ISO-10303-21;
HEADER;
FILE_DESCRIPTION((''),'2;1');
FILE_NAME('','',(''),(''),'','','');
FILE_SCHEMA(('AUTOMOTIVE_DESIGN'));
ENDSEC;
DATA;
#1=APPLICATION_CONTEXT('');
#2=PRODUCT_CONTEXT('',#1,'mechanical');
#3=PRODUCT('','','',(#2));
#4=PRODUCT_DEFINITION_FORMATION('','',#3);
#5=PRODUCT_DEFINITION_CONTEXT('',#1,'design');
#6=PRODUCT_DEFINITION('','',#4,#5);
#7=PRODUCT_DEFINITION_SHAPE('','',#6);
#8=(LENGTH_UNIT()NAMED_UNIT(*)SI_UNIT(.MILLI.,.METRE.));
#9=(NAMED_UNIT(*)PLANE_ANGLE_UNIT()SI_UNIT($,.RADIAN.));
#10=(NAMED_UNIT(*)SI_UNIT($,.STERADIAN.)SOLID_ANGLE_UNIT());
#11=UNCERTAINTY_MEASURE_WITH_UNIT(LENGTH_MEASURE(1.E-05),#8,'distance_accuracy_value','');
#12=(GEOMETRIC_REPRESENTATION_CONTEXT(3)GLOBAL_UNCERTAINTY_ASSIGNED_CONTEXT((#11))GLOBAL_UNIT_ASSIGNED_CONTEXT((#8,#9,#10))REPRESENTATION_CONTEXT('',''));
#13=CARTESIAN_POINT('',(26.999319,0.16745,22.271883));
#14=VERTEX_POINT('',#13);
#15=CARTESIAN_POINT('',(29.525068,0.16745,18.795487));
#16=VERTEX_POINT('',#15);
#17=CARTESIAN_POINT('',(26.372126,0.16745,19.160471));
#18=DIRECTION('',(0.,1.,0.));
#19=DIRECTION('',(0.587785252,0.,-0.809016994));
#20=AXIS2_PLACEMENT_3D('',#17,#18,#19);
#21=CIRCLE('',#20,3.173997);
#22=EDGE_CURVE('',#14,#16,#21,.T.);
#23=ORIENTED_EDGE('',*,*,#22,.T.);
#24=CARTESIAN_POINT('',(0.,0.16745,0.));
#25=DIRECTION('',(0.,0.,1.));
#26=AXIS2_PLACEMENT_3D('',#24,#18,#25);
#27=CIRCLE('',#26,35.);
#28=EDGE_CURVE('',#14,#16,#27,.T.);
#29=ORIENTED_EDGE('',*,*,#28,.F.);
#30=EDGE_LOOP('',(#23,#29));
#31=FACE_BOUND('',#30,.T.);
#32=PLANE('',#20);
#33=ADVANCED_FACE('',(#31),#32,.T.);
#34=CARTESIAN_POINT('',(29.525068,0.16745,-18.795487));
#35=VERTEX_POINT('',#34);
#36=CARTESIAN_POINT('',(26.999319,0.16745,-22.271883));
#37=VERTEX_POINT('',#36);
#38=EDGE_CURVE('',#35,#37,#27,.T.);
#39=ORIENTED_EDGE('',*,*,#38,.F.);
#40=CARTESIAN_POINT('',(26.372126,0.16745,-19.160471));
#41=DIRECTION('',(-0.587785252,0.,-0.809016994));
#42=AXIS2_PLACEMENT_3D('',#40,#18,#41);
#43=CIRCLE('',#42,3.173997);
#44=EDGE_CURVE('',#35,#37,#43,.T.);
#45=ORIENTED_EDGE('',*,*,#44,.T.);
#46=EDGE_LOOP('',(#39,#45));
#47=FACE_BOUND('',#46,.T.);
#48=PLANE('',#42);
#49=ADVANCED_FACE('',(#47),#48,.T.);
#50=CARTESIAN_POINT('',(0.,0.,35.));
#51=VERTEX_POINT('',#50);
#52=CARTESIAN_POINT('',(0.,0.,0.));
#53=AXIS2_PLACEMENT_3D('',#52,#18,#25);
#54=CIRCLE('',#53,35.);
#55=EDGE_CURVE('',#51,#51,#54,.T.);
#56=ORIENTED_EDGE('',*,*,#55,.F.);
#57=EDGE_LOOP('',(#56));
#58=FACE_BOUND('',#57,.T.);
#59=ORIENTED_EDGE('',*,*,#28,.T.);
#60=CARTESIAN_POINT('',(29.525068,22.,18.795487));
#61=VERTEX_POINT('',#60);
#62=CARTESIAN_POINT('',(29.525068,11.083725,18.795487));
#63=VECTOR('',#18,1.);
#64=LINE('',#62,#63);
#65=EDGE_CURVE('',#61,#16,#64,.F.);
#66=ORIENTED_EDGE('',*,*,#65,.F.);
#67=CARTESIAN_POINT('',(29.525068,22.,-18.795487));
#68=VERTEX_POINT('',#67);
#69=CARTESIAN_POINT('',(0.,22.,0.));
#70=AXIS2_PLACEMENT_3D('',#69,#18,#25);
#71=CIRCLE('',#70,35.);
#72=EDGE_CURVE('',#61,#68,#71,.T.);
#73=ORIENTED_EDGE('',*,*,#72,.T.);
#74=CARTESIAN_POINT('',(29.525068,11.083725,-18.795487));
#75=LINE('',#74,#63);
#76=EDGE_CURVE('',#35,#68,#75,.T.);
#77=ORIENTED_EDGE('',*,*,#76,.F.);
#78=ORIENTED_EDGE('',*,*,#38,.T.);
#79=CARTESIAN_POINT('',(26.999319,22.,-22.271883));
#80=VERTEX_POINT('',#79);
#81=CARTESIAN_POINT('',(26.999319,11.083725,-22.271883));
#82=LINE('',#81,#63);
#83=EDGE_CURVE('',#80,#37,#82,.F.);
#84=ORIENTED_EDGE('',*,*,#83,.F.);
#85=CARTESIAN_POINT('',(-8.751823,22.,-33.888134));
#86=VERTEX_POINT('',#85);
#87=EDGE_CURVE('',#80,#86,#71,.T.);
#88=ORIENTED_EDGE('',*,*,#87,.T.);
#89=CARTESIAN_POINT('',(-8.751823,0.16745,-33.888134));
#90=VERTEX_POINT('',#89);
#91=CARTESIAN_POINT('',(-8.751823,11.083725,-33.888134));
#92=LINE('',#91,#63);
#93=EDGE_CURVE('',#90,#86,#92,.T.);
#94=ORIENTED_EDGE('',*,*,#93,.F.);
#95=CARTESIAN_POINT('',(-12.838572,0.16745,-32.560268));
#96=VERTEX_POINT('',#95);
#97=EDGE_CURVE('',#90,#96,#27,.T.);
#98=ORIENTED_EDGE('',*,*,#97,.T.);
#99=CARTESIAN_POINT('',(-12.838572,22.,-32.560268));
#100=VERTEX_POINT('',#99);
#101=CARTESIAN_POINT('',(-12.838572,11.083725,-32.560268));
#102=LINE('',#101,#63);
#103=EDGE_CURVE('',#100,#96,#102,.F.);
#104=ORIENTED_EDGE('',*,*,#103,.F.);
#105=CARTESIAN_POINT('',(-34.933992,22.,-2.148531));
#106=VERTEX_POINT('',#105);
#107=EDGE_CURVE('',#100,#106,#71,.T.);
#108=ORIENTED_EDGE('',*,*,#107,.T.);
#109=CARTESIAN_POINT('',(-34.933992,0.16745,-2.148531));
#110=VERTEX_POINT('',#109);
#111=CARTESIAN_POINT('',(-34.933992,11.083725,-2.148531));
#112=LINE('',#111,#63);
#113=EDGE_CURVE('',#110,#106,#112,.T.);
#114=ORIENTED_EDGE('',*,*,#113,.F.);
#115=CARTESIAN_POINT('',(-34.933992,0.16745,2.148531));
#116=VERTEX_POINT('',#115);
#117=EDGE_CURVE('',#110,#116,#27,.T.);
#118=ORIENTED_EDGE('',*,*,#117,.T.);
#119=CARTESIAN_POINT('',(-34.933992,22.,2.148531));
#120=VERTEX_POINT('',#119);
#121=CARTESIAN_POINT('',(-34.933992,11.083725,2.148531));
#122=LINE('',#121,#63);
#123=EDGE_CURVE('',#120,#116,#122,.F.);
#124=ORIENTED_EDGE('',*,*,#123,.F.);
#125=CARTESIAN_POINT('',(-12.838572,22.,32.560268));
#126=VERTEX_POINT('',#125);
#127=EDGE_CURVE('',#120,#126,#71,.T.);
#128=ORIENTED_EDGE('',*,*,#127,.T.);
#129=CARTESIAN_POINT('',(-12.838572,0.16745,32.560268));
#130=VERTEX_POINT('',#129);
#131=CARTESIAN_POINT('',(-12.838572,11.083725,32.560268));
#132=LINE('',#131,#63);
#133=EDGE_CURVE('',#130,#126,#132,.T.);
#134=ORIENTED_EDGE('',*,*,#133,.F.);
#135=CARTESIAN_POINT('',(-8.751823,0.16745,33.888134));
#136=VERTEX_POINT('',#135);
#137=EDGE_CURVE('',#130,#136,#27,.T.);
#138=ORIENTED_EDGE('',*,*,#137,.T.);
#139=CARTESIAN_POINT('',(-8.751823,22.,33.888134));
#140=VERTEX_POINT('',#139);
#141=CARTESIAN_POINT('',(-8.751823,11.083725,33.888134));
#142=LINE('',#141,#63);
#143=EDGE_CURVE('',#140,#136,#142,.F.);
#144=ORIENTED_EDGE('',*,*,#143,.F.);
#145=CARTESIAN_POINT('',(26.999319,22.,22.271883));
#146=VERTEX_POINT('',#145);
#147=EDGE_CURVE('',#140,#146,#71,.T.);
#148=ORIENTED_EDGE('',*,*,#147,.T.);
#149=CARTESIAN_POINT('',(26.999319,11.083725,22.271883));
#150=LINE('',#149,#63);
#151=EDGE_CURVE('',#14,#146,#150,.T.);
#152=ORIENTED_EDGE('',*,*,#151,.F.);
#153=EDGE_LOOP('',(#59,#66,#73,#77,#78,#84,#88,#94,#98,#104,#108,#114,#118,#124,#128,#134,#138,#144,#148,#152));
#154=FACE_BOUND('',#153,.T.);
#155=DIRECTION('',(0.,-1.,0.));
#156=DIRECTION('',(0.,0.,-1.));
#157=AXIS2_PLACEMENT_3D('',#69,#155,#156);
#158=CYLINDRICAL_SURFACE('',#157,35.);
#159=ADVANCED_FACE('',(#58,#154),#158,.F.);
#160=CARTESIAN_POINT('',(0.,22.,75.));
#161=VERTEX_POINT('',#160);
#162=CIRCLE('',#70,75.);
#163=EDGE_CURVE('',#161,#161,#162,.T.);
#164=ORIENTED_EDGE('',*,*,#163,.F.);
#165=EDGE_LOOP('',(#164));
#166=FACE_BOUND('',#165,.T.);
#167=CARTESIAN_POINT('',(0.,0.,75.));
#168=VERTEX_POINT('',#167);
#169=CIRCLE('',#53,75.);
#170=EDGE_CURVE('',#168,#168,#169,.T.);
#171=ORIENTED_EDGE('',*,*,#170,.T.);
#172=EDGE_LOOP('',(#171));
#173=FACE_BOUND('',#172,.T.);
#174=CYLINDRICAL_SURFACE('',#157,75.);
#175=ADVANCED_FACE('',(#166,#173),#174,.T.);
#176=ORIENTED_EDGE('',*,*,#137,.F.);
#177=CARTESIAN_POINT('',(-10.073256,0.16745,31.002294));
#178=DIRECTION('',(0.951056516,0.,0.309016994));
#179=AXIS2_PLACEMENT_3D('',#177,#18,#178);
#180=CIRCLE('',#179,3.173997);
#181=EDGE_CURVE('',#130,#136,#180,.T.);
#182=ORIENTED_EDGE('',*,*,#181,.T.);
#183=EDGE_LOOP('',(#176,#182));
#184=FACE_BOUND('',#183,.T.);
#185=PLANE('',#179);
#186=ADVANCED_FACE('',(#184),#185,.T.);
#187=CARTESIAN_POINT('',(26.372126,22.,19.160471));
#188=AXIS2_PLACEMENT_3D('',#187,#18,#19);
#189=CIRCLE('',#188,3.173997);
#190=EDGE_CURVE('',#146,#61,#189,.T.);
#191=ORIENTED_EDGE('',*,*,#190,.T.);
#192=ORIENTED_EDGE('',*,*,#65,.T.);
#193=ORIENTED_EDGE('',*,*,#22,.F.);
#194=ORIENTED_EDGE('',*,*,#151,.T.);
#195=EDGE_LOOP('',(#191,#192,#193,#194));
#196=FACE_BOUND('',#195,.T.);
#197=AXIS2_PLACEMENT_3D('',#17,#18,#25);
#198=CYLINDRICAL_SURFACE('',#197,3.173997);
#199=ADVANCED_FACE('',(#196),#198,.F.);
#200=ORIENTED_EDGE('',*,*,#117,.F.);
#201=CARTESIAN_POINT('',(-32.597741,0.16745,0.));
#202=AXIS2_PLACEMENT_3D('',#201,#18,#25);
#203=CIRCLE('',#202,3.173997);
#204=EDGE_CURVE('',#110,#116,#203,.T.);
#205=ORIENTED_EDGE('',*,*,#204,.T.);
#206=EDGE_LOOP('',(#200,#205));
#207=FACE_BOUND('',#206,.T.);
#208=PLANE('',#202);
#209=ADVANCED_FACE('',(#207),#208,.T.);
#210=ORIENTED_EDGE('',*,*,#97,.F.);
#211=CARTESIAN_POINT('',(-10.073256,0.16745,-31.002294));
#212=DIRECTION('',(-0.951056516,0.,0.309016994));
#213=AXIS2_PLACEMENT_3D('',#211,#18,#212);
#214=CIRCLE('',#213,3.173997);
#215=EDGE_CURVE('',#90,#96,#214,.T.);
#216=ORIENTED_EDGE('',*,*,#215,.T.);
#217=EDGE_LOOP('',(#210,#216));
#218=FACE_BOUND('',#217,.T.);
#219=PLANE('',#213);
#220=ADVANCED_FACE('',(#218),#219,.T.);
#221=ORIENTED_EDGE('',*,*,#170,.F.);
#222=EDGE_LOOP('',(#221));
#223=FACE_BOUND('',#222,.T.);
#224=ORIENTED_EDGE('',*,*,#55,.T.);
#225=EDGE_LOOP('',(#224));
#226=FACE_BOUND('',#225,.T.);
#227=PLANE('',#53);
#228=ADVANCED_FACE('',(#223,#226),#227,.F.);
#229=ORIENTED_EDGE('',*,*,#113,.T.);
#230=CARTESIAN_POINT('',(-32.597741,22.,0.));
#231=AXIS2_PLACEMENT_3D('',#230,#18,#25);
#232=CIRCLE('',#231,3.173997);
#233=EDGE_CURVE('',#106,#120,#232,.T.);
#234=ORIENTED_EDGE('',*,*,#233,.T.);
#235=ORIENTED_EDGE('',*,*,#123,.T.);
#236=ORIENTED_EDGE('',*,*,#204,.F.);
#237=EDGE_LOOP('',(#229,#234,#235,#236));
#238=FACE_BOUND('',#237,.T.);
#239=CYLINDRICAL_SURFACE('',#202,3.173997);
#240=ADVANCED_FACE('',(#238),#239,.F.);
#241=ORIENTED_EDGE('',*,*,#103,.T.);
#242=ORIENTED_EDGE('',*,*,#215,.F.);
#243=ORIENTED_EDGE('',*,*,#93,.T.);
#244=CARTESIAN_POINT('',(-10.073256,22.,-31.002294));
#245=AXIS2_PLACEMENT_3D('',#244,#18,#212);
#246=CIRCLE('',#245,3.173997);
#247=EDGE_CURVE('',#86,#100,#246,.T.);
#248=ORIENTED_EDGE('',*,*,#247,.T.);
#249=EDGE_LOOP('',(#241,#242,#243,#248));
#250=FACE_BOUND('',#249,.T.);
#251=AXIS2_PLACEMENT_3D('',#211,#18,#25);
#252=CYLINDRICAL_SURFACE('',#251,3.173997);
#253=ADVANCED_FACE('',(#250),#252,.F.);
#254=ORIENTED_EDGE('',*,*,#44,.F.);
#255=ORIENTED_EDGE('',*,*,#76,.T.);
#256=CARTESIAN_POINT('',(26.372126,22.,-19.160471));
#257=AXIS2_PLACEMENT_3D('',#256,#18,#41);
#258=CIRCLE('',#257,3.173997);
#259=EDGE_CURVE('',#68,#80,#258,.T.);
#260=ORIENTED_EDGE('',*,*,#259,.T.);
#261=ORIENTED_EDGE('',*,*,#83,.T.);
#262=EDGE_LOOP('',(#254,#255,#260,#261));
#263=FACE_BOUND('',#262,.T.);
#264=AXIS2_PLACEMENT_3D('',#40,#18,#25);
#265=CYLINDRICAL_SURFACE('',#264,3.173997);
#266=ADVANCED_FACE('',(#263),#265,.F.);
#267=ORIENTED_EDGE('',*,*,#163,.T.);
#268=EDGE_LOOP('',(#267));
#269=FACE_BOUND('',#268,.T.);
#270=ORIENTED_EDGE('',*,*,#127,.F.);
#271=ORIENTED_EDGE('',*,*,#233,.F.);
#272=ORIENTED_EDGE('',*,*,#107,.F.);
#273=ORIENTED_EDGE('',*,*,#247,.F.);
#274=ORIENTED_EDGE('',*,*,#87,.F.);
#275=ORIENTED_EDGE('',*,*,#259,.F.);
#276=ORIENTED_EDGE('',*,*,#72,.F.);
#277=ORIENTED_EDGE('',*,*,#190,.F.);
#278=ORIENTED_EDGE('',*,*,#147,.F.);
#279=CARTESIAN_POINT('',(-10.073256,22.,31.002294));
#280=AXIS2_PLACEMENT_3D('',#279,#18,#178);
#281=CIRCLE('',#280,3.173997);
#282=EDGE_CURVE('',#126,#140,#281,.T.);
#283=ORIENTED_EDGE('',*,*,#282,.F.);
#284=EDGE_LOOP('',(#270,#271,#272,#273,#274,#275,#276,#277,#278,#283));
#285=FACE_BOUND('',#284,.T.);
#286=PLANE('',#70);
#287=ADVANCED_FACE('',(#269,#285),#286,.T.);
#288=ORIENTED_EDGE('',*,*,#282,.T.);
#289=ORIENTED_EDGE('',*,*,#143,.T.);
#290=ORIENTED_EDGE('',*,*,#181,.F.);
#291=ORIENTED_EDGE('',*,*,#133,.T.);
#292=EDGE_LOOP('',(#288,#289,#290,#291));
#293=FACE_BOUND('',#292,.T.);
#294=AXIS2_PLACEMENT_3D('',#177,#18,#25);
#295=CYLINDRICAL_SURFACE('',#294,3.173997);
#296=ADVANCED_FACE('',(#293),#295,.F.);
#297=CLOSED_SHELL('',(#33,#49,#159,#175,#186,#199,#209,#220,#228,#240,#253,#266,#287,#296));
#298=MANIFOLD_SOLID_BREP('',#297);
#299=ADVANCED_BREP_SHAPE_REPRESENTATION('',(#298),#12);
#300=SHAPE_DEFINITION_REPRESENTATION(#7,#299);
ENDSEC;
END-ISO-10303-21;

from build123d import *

# Parameters (mm, degrees)
SKETCH1_R           = 75
BOSS_EXTRUDE1_DEPTH = 22
SKETCH2_R           = 35
CUT_EXTRUDE1_DEPTH  = 109.323589305
SKETCH3_R           = 3.17399697
CUT_EXTRUDE2_DEPTH  = 21.832550038
CIRPATTERN1_COUNT   = 5


with BuildPart() as part:
    # Sketch1 → Boss-Extrude1 (new body)
    with BuildSketch(Plane(origin=(0, 0, 0), x_dir=(1, 0, 0), z_dir=(0, 1, 0))):
        Circle(SKETCH1_R)
    extrude(amount=BOSS_EXTRUDE1_DEPTH)

    # Sketch2 → Cut-Extrude1 (cut, through all)
    with BuildSketch(Plane(origin=(0, 0, 0), x_dir=(1, 0, 0), z_dir=(0, 1, 0))):
        Circle(SKETCH2_R)
    extrude(amount=CUT_EXTRUDE1_DEPTH, mode=Mode.SUBTRACT)

    # Sketch3 → Cut-Extrude2 (cut)
    with BuildSketch(Plane(origin=(0, 22, 0), x_dir=(1, 0, 0), z_dir=(0, 1, 0))):
        with Locations((-32.597740569, 0)):
            Circle(SKETCH3_R)
    cut_extrude2 = extrude(amount=-CUT_EXTRUDE2_DEPTH, mode=Mode.SUBTRACT)

    # CirPattern1: Cut-Extrude2 ×5 about axis
    cirpattern1_axis = Axis((0, 0, 0), (0, 1, 0))
    for i in range(1, CIRPATTERN1_COUNT):
        add(cut_extrude2.rotate(cirpattern1_axis, i * 360 / CIRPATTERN1_COUNT), mode=Mode.SUBTRACT)


solid = part.part
